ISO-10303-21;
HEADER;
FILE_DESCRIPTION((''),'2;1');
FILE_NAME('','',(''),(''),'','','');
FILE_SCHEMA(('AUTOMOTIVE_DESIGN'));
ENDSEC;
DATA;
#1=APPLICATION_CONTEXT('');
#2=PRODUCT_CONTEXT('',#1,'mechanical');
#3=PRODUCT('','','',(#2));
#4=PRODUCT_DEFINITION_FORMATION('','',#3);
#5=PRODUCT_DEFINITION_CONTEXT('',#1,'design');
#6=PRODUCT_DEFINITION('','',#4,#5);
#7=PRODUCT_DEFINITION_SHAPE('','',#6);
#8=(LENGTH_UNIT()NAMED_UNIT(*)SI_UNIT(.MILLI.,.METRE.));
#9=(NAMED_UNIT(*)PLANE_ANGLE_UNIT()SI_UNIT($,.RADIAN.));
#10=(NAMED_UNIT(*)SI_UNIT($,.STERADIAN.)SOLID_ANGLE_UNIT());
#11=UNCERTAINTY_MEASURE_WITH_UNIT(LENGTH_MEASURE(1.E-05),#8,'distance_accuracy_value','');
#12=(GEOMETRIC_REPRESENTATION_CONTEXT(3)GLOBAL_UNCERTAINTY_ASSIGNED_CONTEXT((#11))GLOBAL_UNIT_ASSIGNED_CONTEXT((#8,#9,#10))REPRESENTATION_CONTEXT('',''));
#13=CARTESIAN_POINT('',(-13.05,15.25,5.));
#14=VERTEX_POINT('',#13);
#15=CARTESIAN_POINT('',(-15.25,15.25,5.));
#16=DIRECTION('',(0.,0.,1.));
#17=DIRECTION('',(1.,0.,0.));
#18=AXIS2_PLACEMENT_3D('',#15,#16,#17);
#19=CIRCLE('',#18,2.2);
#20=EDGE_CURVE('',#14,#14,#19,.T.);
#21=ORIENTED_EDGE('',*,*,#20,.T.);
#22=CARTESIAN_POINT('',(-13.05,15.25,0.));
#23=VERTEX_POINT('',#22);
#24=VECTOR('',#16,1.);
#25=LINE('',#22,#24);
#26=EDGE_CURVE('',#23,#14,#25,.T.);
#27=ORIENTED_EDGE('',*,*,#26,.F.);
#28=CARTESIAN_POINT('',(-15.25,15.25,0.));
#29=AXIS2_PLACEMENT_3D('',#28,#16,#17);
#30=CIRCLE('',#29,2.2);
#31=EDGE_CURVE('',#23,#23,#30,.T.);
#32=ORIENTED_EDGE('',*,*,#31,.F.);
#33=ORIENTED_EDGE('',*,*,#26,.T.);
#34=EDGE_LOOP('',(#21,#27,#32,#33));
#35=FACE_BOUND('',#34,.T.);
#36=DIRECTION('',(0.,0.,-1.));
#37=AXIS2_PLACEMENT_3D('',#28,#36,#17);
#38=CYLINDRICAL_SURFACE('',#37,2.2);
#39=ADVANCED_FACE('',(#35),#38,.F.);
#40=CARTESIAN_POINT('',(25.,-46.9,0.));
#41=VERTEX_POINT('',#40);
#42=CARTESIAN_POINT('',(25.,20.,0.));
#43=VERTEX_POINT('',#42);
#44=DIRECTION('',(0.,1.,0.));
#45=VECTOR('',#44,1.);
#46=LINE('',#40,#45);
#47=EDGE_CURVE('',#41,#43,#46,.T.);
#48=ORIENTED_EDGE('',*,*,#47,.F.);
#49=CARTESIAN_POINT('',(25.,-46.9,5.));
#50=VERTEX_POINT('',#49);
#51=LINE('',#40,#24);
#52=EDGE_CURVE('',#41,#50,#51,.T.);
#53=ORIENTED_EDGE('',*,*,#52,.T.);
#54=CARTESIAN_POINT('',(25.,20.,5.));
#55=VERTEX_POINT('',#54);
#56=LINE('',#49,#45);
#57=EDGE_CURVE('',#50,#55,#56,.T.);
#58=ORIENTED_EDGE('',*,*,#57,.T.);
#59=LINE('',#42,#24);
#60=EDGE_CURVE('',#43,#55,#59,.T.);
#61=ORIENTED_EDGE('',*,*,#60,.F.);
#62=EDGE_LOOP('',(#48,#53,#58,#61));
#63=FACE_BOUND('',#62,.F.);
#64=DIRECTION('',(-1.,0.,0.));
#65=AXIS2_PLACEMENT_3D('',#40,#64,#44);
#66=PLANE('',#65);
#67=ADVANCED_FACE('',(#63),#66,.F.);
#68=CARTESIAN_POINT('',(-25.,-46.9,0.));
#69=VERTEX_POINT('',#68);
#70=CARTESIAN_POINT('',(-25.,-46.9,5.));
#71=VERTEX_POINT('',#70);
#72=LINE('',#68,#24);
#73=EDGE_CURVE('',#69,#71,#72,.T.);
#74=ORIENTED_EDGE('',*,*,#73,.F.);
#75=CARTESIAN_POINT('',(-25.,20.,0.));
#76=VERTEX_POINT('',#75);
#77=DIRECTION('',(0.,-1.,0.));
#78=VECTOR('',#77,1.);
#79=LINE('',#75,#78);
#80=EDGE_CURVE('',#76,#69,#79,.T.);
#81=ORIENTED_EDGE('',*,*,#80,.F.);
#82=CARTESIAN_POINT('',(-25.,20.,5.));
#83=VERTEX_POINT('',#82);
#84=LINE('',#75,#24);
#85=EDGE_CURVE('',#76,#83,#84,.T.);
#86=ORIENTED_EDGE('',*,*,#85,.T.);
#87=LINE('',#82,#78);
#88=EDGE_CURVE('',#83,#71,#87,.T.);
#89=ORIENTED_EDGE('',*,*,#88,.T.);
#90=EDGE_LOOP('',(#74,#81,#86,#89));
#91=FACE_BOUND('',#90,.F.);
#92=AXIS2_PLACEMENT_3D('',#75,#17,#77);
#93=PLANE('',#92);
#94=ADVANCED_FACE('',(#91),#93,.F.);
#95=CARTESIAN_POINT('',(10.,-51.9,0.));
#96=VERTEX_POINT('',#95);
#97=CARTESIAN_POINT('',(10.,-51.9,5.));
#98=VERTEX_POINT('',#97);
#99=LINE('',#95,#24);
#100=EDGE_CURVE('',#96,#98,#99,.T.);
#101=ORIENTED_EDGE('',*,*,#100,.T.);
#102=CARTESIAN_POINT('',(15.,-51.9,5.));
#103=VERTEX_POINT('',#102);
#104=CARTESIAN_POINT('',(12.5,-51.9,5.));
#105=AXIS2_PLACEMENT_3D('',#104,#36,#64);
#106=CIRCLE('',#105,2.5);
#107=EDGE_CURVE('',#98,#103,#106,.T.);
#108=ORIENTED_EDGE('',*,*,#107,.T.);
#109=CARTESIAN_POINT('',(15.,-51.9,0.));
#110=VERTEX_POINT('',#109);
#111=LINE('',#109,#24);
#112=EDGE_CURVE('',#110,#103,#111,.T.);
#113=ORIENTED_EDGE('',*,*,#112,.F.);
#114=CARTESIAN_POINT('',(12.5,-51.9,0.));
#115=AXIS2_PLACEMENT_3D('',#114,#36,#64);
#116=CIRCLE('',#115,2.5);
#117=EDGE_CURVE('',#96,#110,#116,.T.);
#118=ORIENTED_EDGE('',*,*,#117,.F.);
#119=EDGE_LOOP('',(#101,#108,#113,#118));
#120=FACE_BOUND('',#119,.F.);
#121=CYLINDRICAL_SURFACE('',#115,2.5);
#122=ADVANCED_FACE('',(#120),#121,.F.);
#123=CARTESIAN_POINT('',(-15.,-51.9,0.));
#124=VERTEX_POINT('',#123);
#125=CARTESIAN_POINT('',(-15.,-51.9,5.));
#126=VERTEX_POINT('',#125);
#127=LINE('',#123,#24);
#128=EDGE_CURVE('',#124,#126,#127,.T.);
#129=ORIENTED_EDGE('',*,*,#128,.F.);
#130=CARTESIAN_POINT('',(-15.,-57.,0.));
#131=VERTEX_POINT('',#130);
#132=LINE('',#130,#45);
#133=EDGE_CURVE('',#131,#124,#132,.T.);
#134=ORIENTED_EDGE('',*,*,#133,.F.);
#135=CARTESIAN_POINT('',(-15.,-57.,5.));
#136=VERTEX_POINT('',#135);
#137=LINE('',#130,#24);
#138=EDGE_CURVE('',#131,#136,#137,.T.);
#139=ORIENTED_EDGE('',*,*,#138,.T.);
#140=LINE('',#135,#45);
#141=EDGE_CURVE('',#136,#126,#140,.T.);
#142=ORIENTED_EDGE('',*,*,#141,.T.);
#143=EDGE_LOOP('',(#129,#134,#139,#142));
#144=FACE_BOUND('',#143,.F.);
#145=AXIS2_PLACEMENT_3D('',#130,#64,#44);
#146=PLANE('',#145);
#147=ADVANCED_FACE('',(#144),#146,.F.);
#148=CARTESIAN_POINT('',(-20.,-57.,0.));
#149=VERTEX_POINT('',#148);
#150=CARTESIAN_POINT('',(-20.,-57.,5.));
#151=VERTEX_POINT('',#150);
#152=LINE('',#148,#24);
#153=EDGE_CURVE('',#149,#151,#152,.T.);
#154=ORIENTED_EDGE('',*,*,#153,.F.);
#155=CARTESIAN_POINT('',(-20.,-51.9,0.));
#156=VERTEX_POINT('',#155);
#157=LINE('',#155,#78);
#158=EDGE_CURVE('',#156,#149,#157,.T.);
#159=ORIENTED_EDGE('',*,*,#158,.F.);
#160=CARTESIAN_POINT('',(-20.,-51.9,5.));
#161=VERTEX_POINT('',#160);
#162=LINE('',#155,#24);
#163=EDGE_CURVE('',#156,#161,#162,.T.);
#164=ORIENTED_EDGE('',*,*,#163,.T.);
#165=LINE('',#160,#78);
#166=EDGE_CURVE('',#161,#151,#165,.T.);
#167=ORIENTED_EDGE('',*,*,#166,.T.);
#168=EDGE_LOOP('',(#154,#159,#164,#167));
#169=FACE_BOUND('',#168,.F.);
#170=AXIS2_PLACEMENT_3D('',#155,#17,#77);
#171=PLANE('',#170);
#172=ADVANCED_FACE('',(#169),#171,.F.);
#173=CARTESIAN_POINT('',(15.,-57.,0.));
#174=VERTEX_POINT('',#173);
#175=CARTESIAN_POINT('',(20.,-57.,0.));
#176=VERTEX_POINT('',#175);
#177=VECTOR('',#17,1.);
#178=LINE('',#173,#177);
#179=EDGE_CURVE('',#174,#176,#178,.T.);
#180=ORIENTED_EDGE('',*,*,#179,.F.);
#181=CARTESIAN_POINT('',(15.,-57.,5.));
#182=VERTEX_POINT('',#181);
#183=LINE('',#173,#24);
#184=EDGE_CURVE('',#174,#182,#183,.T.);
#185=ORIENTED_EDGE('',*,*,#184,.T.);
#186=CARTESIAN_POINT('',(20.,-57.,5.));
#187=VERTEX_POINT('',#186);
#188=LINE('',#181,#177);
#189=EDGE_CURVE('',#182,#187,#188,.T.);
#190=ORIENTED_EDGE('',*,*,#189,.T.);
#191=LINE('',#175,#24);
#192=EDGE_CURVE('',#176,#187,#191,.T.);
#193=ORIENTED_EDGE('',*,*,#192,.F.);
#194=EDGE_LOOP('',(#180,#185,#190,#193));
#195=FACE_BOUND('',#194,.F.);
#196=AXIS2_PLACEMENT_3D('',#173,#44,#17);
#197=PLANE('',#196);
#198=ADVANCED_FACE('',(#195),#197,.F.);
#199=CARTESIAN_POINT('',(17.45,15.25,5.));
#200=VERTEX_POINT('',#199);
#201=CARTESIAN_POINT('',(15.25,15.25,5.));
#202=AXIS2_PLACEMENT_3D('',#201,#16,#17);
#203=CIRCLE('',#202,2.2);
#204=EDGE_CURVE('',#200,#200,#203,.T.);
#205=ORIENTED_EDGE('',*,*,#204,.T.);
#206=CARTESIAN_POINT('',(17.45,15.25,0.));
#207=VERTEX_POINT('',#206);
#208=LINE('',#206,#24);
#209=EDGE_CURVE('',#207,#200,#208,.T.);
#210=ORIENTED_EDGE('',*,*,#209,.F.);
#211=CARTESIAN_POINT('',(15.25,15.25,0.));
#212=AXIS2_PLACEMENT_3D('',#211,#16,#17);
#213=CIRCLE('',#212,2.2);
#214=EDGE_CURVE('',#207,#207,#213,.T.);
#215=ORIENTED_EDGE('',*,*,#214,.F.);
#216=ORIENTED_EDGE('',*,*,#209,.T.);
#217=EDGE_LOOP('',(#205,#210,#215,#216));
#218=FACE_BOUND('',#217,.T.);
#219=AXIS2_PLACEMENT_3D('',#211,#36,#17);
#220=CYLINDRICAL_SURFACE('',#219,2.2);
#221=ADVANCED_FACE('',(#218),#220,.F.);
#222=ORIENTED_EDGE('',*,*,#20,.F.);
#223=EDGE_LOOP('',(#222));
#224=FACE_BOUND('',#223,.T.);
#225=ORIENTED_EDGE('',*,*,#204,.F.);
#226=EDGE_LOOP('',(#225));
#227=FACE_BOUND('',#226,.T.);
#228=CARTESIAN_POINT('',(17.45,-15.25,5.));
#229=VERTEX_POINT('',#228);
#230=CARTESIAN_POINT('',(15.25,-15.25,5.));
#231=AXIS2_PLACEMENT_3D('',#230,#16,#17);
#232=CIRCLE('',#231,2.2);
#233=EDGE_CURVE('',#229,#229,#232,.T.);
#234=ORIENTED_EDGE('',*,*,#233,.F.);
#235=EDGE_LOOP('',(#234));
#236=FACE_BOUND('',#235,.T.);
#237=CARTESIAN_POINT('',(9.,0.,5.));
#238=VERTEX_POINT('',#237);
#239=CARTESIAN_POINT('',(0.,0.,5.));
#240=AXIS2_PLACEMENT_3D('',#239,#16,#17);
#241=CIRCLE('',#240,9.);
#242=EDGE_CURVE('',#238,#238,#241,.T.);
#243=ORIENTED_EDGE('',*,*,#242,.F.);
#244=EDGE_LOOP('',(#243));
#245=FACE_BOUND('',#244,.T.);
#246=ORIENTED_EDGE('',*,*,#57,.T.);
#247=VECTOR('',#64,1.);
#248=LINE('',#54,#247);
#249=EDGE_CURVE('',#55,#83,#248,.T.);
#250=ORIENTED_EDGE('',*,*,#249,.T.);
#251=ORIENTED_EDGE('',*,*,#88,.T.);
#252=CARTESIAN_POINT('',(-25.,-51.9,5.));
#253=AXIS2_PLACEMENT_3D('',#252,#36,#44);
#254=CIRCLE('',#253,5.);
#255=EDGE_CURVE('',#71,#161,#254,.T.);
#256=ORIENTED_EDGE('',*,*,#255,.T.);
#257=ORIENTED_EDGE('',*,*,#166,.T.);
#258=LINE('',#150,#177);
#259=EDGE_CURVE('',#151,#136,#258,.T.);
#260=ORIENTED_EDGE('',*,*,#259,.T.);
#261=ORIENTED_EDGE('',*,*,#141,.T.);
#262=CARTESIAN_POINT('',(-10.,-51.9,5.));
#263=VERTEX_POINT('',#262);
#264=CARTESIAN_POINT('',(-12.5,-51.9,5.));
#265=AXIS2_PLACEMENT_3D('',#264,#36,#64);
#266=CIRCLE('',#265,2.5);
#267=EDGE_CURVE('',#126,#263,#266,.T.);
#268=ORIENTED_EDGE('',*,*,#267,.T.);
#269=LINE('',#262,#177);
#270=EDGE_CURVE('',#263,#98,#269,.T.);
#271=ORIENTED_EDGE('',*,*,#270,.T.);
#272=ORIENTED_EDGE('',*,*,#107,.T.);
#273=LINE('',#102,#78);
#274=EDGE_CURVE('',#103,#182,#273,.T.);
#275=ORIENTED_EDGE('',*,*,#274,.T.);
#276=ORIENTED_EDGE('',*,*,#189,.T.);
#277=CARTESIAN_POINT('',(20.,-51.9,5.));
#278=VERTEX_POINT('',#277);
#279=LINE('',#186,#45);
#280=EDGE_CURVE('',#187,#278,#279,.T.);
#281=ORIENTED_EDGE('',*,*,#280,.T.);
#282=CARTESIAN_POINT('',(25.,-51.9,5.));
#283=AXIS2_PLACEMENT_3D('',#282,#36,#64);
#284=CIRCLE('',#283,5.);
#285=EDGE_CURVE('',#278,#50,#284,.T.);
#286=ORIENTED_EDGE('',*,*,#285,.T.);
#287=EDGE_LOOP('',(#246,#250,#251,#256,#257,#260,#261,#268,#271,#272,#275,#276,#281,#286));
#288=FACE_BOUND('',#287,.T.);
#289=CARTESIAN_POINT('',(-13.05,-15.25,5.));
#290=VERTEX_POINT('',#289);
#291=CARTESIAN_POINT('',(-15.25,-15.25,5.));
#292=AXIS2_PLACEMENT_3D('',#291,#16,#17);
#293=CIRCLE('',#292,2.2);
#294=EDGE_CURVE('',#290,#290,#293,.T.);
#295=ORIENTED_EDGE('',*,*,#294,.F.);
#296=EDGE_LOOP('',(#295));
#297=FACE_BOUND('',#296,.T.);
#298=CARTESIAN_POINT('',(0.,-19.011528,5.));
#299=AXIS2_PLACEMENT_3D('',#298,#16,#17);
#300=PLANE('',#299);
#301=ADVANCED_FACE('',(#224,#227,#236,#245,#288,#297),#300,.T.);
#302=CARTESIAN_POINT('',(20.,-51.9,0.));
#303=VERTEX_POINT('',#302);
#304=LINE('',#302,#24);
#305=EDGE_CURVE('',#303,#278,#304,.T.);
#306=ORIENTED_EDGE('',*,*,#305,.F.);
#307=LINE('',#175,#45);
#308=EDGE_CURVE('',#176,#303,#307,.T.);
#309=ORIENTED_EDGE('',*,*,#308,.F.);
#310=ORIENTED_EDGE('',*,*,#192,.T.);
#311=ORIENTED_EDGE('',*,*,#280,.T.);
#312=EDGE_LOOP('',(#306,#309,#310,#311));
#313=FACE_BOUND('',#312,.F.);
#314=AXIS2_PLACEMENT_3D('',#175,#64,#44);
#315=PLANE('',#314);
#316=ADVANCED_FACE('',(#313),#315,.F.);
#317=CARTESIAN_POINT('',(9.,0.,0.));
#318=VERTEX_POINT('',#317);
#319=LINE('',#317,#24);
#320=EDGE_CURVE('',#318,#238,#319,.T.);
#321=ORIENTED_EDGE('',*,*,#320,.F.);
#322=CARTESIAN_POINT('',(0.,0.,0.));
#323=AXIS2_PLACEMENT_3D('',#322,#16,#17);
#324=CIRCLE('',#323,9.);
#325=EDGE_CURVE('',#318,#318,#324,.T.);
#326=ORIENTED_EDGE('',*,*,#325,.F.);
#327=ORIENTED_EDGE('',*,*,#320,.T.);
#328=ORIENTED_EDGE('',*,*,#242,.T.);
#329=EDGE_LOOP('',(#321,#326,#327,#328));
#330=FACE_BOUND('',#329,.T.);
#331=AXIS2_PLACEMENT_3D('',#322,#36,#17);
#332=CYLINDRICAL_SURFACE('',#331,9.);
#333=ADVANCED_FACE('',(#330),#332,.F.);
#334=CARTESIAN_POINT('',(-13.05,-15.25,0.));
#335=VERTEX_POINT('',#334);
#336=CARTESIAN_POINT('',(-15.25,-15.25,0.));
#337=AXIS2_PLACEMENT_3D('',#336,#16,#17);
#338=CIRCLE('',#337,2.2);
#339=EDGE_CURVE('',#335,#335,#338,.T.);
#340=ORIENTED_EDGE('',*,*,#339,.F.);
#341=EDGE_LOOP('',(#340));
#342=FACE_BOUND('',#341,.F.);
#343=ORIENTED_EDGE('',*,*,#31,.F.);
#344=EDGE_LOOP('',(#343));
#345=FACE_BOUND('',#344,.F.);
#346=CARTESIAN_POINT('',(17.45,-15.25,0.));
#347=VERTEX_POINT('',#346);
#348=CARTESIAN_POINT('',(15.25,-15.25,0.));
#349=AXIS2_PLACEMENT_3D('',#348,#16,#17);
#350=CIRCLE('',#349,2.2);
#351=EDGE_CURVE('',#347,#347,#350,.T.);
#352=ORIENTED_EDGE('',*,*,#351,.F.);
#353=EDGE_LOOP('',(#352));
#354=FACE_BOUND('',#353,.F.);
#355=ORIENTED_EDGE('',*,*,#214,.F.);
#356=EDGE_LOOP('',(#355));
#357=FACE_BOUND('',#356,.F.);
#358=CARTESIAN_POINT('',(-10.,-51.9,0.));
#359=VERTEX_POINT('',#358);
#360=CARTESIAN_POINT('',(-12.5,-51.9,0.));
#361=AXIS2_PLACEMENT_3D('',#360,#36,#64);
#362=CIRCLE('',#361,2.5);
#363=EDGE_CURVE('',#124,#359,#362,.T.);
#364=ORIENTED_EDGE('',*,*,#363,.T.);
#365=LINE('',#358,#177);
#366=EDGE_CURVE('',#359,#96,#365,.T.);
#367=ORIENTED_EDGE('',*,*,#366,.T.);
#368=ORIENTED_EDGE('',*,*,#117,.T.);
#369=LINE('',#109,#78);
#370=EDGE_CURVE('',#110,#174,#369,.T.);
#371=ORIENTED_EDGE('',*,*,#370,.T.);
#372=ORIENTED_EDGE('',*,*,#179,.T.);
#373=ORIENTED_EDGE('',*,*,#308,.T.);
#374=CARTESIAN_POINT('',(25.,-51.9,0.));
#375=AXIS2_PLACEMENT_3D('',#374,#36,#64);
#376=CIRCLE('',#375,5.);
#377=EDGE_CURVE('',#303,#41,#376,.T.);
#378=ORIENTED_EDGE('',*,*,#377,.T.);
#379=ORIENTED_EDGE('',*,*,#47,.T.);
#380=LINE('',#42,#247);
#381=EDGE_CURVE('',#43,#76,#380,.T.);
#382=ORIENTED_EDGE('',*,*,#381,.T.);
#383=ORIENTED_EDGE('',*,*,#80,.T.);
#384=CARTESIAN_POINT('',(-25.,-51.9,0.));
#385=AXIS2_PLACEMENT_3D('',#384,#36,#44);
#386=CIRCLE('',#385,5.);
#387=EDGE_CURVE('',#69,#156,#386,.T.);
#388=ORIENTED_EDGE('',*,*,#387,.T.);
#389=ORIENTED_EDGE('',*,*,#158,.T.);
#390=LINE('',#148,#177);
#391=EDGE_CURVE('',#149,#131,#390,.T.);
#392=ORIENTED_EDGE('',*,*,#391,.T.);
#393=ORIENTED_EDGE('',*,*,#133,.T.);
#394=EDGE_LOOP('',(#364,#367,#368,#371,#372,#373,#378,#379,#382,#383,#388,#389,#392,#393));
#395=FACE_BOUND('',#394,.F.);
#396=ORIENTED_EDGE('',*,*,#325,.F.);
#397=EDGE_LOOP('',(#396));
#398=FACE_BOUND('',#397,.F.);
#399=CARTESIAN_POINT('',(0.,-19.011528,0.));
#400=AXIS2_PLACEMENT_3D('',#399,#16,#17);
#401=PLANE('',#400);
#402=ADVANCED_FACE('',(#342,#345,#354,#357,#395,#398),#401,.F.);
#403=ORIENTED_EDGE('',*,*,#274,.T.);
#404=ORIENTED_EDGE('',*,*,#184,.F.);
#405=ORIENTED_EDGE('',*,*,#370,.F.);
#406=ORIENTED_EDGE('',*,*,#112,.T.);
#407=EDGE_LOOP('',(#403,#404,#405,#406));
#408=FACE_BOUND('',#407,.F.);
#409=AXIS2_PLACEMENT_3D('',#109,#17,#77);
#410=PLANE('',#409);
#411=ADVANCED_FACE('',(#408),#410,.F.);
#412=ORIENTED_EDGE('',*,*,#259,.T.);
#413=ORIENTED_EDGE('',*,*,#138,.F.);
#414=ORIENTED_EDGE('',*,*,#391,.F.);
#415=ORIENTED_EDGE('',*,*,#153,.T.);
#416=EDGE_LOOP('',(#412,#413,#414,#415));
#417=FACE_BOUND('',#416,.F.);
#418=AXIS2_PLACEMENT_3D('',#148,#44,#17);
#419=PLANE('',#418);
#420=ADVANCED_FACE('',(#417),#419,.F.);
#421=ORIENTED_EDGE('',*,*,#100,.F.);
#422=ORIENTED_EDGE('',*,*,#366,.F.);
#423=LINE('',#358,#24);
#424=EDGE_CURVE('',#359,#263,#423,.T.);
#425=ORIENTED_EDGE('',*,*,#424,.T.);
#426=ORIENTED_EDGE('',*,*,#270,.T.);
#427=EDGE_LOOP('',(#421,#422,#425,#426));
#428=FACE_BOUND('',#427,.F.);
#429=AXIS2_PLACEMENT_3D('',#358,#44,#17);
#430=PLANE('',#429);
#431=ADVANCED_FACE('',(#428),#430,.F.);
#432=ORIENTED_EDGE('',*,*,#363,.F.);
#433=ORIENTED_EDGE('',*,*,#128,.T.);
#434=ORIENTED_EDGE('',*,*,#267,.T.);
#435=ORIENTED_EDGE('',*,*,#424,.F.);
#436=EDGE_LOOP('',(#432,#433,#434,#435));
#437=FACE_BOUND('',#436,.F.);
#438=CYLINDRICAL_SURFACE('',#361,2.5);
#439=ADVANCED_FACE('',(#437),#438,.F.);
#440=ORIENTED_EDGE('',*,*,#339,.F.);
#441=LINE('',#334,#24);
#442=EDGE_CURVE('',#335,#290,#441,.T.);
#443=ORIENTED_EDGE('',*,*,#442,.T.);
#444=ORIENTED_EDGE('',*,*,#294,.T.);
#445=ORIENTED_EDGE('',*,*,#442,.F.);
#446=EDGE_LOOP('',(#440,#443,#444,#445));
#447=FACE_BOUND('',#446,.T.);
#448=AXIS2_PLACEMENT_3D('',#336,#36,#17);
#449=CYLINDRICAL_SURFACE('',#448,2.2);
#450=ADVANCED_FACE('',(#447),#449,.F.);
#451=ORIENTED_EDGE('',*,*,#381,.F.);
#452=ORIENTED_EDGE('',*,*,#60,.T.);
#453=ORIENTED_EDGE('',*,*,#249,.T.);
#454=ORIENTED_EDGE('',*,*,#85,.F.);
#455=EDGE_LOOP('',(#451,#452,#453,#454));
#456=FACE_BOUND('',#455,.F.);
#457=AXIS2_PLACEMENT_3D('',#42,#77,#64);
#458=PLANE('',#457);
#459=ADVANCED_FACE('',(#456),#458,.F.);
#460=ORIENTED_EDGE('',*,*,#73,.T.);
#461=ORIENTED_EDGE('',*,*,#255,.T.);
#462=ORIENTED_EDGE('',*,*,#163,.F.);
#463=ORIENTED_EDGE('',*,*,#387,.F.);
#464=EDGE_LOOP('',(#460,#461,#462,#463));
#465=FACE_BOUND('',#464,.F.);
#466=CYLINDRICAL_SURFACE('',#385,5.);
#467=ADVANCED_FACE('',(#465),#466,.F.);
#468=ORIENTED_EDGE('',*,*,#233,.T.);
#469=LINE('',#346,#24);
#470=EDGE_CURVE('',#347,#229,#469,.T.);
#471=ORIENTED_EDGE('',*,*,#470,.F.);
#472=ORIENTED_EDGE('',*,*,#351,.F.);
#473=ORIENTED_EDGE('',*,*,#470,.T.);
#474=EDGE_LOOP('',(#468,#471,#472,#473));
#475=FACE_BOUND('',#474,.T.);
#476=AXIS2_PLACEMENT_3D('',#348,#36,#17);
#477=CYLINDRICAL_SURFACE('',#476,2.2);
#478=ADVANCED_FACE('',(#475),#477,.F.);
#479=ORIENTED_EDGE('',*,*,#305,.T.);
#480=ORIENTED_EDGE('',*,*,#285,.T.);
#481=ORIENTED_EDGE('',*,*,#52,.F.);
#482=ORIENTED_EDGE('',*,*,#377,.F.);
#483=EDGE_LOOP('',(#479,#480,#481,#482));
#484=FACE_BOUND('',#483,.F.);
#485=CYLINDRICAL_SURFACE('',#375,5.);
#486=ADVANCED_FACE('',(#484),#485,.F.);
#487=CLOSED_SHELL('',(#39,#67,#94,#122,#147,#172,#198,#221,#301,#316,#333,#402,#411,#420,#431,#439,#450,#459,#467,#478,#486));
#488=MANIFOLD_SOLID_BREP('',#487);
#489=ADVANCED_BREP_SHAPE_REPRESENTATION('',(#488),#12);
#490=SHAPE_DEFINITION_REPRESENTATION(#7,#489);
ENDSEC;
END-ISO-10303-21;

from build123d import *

# Parameters (mm, degrees)
F1_R     = 2.2
F1_R_2   = 9
F2_DEPTH = 5


# Not quite as in the source:
# - a feature names something its author has since deleted; it is built from what else it names


with BuildPart() as f2:
    # F1 (on Top) → F2 (new body)
    with BuildSketch(Plane.XY):
        with BuildLine():
            Line((25, 20), (20, 20))
            Line((20, 20), (-20, 20))
            Line((-20, 20), (-25, 20))
            Line((-25, 20), (-25, -46.9))
            ThreePointArc((-25, -46.9), (-21.4644660941, -48.3644660941), (-20, -51.9))
            Line((-20, -51.9), (-20, -57))
            Line((-20, -57), (-15, -57))
            Line((-15, -57), (-15, -51.9))
            ThreePointArc((-15, -51.9), (-12.5, -49.4), (-10, -51.9))
            Line((-10, -51.9), (0, -51.9))
            Line((0, -51.9), (10, -51.9))
            ThreePointArc((10, -51.9), (12.5, -49.4), (15, -51.9))
            Line((15, -51.9), (15, -57))
            Line((15, -57), (20, -57))
            Line((20, -57), (20, -51.9))
            ThreePointArc((20, -51.9), (21.4644660941, -48.3644660941), (25, -46.9))
            Line((25, -46.9), (25, 20))
        make_face()
        with Locations((-15.25, -15.25)):
            Circle(F1_R, mode=Mode.SUBTRACT)
        with Locations((-15.25, 15.25)):
            Circle(F1_R, mode=Mode.SUBTRACT)
        Circle(F1_R_2, mode=Mode.SUBTRACT)
        with Locations((15.25, -15.25)):
            Circle(F1_R, mode=Mode.SUBTRACT)
        with Locations((15.25, 15.25)):
            Circle(F1_R, mode=Mode.SUBTRACT)
    extrude(amount=F2_DEPTH)


solid = f2.part
